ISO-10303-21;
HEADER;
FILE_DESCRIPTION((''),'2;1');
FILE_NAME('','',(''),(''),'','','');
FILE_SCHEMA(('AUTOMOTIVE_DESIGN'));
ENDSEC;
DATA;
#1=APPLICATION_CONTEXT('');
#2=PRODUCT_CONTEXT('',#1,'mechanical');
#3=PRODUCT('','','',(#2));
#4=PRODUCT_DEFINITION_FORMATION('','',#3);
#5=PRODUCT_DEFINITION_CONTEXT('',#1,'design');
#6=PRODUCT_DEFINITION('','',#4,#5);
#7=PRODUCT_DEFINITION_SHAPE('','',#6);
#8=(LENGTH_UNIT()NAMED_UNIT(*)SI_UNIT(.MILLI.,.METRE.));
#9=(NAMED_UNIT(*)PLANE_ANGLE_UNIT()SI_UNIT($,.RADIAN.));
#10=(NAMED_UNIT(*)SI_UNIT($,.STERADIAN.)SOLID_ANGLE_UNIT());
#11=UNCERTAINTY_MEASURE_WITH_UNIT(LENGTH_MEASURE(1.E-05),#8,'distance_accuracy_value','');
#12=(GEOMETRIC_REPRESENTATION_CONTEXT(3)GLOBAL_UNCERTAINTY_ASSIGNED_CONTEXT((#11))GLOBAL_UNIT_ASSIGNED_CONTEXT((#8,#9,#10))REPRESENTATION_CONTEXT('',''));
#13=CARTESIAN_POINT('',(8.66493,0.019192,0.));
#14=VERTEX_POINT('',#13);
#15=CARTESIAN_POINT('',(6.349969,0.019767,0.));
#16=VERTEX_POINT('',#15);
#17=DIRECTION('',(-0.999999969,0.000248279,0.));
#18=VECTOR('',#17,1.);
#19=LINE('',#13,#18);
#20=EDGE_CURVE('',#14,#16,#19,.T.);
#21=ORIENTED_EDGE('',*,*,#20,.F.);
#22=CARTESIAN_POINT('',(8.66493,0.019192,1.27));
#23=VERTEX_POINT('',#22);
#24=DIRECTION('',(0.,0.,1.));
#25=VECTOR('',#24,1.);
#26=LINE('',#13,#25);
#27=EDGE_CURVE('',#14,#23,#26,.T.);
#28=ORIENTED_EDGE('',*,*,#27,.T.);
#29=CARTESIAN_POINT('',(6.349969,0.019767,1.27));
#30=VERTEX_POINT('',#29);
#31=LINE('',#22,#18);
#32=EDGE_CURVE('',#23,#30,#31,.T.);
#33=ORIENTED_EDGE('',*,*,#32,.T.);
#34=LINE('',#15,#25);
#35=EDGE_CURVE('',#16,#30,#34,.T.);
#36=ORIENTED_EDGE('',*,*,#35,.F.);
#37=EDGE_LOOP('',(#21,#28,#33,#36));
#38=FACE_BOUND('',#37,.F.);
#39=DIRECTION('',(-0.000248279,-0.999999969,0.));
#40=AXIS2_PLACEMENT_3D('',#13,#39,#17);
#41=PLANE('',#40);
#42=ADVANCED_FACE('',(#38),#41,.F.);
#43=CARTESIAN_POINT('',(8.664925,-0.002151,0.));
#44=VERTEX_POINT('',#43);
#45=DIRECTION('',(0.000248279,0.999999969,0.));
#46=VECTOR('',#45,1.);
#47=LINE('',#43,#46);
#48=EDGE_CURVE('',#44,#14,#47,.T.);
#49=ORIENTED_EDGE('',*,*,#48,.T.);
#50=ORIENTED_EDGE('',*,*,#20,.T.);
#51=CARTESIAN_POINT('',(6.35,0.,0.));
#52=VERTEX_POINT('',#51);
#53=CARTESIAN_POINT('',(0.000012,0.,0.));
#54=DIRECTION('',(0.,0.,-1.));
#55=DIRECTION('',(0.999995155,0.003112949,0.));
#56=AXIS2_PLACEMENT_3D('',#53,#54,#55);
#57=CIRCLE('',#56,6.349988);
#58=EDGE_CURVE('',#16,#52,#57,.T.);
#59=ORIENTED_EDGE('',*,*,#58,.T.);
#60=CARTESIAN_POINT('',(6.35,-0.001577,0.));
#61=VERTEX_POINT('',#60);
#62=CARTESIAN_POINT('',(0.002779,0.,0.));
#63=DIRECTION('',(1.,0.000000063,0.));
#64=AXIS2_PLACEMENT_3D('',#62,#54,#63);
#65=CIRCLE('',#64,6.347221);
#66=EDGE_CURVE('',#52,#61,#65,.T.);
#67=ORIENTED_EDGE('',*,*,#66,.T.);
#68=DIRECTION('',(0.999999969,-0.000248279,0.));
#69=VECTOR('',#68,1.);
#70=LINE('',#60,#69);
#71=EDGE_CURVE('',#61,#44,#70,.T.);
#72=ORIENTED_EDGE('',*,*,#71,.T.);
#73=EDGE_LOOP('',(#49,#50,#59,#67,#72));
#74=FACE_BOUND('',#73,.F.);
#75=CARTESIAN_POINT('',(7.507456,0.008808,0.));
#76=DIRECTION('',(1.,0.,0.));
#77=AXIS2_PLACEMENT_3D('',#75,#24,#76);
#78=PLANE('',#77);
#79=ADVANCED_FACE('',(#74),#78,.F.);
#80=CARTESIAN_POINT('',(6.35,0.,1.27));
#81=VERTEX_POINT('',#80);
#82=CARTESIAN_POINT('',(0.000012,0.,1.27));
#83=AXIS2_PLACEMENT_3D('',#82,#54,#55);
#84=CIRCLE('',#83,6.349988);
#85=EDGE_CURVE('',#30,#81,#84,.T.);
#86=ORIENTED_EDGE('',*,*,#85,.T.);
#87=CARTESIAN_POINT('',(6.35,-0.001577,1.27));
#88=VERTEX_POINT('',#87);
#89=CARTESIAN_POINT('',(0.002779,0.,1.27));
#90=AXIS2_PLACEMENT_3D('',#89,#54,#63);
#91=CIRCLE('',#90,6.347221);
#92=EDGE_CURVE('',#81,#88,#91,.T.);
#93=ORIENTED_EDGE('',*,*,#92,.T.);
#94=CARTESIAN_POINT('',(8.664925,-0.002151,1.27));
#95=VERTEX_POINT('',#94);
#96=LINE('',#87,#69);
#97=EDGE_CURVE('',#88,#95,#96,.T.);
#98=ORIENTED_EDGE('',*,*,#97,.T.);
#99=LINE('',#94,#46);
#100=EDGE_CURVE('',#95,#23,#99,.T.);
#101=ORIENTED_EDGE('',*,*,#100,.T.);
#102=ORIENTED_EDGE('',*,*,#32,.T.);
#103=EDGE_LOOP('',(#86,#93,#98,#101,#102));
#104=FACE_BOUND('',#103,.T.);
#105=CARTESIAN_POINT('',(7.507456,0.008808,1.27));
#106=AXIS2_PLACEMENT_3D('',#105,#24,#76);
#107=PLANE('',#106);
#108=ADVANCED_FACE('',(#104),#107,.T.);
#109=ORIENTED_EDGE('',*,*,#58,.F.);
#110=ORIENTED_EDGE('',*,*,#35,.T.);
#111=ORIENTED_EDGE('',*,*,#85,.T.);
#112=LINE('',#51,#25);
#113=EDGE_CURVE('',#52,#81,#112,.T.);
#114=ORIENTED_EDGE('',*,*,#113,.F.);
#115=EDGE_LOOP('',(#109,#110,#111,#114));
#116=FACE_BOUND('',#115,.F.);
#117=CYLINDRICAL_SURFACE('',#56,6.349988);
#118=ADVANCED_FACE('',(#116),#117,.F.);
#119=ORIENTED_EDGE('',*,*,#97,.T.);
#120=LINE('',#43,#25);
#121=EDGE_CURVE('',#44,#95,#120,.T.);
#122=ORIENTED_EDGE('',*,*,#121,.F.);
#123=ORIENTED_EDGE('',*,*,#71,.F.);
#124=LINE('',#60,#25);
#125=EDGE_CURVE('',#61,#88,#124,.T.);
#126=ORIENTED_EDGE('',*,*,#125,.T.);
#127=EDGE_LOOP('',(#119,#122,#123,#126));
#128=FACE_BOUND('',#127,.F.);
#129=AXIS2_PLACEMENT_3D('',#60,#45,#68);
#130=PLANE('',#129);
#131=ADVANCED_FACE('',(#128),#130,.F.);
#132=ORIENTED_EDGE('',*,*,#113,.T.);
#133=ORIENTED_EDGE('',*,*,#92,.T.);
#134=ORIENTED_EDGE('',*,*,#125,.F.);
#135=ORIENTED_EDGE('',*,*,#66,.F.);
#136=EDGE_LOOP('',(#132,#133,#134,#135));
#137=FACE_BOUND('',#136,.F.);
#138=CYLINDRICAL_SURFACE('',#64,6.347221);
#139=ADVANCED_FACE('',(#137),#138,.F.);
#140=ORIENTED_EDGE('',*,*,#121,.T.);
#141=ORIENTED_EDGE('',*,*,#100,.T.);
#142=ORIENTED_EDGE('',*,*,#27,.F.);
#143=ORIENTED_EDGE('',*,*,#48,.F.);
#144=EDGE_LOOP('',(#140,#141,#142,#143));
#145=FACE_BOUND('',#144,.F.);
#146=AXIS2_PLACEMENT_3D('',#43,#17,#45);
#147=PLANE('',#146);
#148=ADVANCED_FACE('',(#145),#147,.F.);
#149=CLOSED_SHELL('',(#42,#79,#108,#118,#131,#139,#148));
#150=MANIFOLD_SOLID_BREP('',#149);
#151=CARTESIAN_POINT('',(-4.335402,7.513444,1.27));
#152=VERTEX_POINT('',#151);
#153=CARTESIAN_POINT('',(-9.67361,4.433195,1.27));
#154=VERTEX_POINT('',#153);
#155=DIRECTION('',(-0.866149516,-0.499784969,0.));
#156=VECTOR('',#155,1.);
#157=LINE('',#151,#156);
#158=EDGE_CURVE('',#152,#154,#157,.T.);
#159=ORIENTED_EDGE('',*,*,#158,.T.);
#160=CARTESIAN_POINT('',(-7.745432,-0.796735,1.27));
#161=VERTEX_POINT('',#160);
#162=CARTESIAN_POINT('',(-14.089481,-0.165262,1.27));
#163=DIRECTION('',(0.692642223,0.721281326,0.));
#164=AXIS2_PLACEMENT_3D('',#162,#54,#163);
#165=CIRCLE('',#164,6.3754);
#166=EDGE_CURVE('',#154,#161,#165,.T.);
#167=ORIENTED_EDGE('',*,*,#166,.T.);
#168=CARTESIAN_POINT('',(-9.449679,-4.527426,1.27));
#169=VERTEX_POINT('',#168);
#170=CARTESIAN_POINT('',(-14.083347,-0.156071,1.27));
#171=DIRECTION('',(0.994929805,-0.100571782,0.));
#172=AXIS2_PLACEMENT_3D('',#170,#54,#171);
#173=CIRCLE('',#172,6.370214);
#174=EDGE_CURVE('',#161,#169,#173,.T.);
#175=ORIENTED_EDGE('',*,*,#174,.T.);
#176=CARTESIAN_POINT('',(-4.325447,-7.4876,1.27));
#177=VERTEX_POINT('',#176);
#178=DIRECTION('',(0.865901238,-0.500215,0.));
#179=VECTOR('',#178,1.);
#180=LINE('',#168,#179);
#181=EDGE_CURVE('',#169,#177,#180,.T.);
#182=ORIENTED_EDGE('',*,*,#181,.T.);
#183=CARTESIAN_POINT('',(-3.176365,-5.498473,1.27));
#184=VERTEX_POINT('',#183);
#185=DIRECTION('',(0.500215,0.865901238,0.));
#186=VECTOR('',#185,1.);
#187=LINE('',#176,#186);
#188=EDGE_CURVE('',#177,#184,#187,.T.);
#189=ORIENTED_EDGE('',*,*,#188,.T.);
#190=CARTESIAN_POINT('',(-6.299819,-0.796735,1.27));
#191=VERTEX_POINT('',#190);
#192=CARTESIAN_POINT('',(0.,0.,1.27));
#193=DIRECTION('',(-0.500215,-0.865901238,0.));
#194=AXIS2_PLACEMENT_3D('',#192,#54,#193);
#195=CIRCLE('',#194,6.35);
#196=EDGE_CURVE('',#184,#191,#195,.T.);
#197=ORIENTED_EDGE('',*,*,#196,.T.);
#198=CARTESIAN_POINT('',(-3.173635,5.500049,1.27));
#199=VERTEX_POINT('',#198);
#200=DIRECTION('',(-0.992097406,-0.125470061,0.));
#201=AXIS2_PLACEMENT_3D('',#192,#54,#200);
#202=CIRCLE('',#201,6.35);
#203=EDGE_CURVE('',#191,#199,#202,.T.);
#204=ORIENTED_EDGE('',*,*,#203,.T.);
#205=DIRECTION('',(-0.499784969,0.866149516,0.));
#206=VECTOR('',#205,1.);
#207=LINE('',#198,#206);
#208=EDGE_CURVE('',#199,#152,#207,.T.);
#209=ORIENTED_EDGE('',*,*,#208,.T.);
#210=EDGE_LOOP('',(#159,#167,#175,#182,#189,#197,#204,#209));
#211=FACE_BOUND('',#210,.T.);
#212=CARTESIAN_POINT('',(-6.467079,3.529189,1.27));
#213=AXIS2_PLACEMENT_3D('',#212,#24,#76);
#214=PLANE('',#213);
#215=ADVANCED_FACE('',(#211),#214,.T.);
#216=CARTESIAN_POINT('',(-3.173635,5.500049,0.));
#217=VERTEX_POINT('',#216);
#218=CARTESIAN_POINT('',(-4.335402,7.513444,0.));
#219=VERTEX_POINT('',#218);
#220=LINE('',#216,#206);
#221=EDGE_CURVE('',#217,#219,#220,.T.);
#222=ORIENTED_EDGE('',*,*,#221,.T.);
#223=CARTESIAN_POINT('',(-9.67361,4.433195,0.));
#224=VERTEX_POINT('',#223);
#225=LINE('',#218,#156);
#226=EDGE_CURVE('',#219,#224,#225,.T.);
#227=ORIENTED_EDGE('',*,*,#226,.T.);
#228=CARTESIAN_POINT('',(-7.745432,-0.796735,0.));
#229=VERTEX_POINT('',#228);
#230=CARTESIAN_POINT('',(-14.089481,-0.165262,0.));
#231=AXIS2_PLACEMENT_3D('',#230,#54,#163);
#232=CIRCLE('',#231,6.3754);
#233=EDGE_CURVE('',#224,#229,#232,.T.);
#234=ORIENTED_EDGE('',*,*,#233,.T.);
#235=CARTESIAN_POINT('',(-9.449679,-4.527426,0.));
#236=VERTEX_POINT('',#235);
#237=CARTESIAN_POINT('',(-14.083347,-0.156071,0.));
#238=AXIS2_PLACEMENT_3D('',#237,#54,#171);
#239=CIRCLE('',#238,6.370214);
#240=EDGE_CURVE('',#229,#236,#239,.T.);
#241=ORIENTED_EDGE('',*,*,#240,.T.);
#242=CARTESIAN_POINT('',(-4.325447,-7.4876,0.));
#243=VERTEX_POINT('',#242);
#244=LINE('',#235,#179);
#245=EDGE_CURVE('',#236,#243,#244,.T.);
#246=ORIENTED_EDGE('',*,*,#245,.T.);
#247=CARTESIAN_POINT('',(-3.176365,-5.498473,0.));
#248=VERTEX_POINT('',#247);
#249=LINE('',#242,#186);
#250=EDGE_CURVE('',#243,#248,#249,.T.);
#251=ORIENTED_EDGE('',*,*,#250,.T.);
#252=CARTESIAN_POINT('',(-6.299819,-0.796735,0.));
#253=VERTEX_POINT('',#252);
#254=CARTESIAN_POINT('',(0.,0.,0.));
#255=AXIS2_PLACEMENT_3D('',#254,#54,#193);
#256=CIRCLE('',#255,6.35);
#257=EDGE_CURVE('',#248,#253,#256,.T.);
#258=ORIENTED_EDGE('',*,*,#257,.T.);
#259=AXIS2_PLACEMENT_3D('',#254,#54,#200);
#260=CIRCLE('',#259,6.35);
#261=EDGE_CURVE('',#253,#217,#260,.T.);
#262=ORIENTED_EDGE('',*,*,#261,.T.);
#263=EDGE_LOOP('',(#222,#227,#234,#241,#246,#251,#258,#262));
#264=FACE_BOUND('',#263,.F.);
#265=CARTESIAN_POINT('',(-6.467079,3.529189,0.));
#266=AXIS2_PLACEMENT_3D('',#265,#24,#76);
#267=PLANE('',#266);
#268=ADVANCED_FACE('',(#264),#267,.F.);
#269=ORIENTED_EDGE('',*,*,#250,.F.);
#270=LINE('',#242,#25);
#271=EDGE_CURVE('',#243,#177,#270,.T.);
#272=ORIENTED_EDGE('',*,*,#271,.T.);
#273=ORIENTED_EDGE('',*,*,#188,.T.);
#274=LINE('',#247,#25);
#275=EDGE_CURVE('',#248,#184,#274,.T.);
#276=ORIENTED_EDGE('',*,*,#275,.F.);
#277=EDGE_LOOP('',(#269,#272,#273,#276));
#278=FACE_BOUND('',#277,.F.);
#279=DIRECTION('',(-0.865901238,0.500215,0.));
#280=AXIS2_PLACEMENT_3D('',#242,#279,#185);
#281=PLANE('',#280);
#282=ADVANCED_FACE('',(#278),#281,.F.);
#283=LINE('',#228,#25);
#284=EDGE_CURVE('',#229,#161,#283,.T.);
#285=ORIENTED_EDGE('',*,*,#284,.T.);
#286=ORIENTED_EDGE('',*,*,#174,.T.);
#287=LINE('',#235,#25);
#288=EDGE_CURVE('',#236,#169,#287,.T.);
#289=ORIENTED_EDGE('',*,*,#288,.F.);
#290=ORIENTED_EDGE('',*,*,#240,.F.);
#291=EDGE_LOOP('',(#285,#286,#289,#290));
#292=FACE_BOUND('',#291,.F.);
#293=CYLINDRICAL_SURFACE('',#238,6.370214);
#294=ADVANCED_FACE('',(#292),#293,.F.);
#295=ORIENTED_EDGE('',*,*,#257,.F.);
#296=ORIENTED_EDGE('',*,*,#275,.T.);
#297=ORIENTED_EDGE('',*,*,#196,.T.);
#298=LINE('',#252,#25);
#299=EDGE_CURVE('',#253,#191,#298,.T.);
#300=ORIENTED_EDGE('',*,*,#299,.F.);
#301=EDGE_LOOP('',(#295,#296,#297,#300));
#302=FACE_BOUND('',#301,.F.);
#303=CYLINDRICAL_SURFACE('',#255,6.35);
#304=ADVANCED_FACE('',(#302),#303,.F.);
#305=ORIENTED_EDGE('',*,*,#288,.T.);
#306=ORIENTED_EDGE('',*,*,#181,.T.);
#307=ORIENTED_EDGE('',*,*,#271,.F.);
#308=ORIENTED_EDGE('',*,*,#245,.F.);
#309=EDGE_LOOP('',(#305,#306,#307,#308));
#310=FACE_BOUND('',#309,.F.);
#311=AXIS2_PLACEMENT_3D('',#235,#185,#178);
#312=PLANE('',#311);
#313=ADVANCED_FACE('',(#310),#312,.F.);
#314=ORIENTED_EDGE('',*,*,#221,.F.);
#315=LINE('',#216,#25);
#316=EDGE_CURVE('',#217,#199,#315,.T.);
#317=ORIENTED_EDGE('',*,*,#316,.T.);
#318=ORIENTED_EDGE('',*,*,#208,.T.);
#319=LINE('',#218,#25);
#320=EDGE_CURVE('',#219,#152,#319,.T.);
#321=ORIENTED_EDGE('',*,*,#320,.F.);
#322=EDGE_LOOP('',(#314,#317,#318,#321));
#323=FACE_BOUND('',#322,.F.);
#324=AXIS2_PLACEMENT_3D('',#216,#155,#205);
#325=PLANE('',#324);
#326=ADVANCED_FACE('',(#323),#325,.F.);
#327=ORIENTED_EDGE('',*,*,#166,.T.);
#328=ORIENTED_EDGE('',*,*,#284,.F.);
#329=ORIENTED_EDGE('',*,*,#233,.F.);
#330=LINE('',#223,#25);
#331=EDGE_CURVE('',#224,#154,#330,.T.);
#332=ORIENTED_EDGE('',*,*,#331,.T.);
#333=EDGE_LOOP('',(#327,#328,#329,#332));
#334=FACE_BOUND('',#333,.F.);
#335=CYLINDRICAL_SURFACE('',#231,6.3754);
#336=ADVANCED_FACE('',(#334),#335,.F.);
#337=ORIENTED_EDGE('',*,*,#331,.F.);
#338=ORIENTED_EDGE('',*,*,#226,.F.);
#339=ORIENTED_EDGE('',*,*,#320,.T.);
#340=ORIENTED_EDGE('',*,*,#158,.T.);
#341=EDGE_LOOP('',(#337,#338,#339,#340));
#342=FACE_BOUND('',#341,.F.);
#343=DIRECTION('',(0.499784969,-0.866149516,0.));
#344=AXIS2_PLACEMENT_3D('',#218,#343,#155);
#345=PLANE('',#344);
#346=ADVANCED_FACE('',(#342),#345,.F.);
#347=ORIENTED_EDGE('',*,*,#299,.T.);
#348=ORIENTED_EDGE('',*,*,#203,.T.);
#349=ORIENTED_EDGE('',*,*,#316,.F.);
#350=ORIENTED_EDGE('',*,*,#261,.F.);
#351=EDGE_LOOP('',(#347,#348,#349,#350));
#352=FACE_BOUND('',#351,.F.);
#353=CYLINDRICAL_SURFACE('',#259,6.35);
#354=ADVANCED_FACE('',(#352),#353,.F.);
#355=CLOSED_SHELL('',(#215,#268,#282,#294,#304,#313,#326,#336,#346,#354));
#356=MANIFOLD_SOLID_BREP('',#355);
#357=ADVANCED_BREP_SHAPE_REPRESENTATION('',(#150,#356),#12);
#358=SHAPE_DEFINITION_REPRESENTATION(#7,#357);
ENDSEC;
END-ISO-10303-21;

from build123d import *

# Parameters (mm, degrees)
F1_DEPTH = 1.27


# Not quite as in the source:
# - a feature names something its author has since deleted; it is built from what else it names


with BuildPart() as f1:
    # F0 (on Top) → F1 (new body)
    with BuildSketch(Plane.XY):
        with BuildLine():
            ThreePointArc((6.3499692328, 0.0197671951), (6.3499923082, 0.0098836095), (6.35, 0))
            ThreePointArc((6.35, 0), (6.3499999511, -0.0007882849), (6.3499998043, -0.0015765697))
            Line((6.3499998043, -0.0015765697), (8.6649251995, -0.0021513164))
            Line((8.6649251995, -0.0021513164), (8.6649304987, 0.0191924395))
            Line((8.6649304987, 0.0191924395), (6.3499692328, 0.0197671951))
        make_face()
    extrude(amount=F1_DEPTH)


with BuildPart() as f1b:
    # F0 (on Top) → F1, piece 2 (new body)
    with BuildSketch(Plane.XY):
        with BuildLine():
            ThreePointArc((-6.2998185309, -0.7967348855), (-5.6876138678, 2.8237472428), (-3.1736345527, 5.5000494294))
            Line((-3.1736345527, 5.5000494294), (-4.3354020531, 7.5134440315))
            Line((-4.3354020531, 7.5134440315), (-9.6736101808, 4.43319503))
            ThreePointArc((-9.6736101808, 4.43319503), (-8.1076742802, 2.0401198083), (-7.7454316716, -0.7967348855))
            Line((-7.7454316716, -0.7967348855), (-6.2998185309, -0.7967348855))
        make_face()
        with BuildLine():
            Line((-4.3254468713, -7.4875999277), (-3.1763652516, -5.4984728597))
            ThreePointArc((-3.1763652516, -5.4984728597), (-5.28924378, -3.513744475), (-6.2998185309, -0.7967348855))
            Line((-6.2998185309, -0.7967348855), (-7.7454316716, -0.7967348855))
            ThreePointArc((-7.7454316716, -0.7967348855), (-8.2890892892, -2.8029936058), (-9.4496794179, -4.5274263273))
            Line((-9.4496794179, -4.5274263273), (-4.3254468713, -7.4875999277))
        make_face()
    extrude(amount=F1_DEPTH)


solid = Compound([f1.part, f1b.part])
